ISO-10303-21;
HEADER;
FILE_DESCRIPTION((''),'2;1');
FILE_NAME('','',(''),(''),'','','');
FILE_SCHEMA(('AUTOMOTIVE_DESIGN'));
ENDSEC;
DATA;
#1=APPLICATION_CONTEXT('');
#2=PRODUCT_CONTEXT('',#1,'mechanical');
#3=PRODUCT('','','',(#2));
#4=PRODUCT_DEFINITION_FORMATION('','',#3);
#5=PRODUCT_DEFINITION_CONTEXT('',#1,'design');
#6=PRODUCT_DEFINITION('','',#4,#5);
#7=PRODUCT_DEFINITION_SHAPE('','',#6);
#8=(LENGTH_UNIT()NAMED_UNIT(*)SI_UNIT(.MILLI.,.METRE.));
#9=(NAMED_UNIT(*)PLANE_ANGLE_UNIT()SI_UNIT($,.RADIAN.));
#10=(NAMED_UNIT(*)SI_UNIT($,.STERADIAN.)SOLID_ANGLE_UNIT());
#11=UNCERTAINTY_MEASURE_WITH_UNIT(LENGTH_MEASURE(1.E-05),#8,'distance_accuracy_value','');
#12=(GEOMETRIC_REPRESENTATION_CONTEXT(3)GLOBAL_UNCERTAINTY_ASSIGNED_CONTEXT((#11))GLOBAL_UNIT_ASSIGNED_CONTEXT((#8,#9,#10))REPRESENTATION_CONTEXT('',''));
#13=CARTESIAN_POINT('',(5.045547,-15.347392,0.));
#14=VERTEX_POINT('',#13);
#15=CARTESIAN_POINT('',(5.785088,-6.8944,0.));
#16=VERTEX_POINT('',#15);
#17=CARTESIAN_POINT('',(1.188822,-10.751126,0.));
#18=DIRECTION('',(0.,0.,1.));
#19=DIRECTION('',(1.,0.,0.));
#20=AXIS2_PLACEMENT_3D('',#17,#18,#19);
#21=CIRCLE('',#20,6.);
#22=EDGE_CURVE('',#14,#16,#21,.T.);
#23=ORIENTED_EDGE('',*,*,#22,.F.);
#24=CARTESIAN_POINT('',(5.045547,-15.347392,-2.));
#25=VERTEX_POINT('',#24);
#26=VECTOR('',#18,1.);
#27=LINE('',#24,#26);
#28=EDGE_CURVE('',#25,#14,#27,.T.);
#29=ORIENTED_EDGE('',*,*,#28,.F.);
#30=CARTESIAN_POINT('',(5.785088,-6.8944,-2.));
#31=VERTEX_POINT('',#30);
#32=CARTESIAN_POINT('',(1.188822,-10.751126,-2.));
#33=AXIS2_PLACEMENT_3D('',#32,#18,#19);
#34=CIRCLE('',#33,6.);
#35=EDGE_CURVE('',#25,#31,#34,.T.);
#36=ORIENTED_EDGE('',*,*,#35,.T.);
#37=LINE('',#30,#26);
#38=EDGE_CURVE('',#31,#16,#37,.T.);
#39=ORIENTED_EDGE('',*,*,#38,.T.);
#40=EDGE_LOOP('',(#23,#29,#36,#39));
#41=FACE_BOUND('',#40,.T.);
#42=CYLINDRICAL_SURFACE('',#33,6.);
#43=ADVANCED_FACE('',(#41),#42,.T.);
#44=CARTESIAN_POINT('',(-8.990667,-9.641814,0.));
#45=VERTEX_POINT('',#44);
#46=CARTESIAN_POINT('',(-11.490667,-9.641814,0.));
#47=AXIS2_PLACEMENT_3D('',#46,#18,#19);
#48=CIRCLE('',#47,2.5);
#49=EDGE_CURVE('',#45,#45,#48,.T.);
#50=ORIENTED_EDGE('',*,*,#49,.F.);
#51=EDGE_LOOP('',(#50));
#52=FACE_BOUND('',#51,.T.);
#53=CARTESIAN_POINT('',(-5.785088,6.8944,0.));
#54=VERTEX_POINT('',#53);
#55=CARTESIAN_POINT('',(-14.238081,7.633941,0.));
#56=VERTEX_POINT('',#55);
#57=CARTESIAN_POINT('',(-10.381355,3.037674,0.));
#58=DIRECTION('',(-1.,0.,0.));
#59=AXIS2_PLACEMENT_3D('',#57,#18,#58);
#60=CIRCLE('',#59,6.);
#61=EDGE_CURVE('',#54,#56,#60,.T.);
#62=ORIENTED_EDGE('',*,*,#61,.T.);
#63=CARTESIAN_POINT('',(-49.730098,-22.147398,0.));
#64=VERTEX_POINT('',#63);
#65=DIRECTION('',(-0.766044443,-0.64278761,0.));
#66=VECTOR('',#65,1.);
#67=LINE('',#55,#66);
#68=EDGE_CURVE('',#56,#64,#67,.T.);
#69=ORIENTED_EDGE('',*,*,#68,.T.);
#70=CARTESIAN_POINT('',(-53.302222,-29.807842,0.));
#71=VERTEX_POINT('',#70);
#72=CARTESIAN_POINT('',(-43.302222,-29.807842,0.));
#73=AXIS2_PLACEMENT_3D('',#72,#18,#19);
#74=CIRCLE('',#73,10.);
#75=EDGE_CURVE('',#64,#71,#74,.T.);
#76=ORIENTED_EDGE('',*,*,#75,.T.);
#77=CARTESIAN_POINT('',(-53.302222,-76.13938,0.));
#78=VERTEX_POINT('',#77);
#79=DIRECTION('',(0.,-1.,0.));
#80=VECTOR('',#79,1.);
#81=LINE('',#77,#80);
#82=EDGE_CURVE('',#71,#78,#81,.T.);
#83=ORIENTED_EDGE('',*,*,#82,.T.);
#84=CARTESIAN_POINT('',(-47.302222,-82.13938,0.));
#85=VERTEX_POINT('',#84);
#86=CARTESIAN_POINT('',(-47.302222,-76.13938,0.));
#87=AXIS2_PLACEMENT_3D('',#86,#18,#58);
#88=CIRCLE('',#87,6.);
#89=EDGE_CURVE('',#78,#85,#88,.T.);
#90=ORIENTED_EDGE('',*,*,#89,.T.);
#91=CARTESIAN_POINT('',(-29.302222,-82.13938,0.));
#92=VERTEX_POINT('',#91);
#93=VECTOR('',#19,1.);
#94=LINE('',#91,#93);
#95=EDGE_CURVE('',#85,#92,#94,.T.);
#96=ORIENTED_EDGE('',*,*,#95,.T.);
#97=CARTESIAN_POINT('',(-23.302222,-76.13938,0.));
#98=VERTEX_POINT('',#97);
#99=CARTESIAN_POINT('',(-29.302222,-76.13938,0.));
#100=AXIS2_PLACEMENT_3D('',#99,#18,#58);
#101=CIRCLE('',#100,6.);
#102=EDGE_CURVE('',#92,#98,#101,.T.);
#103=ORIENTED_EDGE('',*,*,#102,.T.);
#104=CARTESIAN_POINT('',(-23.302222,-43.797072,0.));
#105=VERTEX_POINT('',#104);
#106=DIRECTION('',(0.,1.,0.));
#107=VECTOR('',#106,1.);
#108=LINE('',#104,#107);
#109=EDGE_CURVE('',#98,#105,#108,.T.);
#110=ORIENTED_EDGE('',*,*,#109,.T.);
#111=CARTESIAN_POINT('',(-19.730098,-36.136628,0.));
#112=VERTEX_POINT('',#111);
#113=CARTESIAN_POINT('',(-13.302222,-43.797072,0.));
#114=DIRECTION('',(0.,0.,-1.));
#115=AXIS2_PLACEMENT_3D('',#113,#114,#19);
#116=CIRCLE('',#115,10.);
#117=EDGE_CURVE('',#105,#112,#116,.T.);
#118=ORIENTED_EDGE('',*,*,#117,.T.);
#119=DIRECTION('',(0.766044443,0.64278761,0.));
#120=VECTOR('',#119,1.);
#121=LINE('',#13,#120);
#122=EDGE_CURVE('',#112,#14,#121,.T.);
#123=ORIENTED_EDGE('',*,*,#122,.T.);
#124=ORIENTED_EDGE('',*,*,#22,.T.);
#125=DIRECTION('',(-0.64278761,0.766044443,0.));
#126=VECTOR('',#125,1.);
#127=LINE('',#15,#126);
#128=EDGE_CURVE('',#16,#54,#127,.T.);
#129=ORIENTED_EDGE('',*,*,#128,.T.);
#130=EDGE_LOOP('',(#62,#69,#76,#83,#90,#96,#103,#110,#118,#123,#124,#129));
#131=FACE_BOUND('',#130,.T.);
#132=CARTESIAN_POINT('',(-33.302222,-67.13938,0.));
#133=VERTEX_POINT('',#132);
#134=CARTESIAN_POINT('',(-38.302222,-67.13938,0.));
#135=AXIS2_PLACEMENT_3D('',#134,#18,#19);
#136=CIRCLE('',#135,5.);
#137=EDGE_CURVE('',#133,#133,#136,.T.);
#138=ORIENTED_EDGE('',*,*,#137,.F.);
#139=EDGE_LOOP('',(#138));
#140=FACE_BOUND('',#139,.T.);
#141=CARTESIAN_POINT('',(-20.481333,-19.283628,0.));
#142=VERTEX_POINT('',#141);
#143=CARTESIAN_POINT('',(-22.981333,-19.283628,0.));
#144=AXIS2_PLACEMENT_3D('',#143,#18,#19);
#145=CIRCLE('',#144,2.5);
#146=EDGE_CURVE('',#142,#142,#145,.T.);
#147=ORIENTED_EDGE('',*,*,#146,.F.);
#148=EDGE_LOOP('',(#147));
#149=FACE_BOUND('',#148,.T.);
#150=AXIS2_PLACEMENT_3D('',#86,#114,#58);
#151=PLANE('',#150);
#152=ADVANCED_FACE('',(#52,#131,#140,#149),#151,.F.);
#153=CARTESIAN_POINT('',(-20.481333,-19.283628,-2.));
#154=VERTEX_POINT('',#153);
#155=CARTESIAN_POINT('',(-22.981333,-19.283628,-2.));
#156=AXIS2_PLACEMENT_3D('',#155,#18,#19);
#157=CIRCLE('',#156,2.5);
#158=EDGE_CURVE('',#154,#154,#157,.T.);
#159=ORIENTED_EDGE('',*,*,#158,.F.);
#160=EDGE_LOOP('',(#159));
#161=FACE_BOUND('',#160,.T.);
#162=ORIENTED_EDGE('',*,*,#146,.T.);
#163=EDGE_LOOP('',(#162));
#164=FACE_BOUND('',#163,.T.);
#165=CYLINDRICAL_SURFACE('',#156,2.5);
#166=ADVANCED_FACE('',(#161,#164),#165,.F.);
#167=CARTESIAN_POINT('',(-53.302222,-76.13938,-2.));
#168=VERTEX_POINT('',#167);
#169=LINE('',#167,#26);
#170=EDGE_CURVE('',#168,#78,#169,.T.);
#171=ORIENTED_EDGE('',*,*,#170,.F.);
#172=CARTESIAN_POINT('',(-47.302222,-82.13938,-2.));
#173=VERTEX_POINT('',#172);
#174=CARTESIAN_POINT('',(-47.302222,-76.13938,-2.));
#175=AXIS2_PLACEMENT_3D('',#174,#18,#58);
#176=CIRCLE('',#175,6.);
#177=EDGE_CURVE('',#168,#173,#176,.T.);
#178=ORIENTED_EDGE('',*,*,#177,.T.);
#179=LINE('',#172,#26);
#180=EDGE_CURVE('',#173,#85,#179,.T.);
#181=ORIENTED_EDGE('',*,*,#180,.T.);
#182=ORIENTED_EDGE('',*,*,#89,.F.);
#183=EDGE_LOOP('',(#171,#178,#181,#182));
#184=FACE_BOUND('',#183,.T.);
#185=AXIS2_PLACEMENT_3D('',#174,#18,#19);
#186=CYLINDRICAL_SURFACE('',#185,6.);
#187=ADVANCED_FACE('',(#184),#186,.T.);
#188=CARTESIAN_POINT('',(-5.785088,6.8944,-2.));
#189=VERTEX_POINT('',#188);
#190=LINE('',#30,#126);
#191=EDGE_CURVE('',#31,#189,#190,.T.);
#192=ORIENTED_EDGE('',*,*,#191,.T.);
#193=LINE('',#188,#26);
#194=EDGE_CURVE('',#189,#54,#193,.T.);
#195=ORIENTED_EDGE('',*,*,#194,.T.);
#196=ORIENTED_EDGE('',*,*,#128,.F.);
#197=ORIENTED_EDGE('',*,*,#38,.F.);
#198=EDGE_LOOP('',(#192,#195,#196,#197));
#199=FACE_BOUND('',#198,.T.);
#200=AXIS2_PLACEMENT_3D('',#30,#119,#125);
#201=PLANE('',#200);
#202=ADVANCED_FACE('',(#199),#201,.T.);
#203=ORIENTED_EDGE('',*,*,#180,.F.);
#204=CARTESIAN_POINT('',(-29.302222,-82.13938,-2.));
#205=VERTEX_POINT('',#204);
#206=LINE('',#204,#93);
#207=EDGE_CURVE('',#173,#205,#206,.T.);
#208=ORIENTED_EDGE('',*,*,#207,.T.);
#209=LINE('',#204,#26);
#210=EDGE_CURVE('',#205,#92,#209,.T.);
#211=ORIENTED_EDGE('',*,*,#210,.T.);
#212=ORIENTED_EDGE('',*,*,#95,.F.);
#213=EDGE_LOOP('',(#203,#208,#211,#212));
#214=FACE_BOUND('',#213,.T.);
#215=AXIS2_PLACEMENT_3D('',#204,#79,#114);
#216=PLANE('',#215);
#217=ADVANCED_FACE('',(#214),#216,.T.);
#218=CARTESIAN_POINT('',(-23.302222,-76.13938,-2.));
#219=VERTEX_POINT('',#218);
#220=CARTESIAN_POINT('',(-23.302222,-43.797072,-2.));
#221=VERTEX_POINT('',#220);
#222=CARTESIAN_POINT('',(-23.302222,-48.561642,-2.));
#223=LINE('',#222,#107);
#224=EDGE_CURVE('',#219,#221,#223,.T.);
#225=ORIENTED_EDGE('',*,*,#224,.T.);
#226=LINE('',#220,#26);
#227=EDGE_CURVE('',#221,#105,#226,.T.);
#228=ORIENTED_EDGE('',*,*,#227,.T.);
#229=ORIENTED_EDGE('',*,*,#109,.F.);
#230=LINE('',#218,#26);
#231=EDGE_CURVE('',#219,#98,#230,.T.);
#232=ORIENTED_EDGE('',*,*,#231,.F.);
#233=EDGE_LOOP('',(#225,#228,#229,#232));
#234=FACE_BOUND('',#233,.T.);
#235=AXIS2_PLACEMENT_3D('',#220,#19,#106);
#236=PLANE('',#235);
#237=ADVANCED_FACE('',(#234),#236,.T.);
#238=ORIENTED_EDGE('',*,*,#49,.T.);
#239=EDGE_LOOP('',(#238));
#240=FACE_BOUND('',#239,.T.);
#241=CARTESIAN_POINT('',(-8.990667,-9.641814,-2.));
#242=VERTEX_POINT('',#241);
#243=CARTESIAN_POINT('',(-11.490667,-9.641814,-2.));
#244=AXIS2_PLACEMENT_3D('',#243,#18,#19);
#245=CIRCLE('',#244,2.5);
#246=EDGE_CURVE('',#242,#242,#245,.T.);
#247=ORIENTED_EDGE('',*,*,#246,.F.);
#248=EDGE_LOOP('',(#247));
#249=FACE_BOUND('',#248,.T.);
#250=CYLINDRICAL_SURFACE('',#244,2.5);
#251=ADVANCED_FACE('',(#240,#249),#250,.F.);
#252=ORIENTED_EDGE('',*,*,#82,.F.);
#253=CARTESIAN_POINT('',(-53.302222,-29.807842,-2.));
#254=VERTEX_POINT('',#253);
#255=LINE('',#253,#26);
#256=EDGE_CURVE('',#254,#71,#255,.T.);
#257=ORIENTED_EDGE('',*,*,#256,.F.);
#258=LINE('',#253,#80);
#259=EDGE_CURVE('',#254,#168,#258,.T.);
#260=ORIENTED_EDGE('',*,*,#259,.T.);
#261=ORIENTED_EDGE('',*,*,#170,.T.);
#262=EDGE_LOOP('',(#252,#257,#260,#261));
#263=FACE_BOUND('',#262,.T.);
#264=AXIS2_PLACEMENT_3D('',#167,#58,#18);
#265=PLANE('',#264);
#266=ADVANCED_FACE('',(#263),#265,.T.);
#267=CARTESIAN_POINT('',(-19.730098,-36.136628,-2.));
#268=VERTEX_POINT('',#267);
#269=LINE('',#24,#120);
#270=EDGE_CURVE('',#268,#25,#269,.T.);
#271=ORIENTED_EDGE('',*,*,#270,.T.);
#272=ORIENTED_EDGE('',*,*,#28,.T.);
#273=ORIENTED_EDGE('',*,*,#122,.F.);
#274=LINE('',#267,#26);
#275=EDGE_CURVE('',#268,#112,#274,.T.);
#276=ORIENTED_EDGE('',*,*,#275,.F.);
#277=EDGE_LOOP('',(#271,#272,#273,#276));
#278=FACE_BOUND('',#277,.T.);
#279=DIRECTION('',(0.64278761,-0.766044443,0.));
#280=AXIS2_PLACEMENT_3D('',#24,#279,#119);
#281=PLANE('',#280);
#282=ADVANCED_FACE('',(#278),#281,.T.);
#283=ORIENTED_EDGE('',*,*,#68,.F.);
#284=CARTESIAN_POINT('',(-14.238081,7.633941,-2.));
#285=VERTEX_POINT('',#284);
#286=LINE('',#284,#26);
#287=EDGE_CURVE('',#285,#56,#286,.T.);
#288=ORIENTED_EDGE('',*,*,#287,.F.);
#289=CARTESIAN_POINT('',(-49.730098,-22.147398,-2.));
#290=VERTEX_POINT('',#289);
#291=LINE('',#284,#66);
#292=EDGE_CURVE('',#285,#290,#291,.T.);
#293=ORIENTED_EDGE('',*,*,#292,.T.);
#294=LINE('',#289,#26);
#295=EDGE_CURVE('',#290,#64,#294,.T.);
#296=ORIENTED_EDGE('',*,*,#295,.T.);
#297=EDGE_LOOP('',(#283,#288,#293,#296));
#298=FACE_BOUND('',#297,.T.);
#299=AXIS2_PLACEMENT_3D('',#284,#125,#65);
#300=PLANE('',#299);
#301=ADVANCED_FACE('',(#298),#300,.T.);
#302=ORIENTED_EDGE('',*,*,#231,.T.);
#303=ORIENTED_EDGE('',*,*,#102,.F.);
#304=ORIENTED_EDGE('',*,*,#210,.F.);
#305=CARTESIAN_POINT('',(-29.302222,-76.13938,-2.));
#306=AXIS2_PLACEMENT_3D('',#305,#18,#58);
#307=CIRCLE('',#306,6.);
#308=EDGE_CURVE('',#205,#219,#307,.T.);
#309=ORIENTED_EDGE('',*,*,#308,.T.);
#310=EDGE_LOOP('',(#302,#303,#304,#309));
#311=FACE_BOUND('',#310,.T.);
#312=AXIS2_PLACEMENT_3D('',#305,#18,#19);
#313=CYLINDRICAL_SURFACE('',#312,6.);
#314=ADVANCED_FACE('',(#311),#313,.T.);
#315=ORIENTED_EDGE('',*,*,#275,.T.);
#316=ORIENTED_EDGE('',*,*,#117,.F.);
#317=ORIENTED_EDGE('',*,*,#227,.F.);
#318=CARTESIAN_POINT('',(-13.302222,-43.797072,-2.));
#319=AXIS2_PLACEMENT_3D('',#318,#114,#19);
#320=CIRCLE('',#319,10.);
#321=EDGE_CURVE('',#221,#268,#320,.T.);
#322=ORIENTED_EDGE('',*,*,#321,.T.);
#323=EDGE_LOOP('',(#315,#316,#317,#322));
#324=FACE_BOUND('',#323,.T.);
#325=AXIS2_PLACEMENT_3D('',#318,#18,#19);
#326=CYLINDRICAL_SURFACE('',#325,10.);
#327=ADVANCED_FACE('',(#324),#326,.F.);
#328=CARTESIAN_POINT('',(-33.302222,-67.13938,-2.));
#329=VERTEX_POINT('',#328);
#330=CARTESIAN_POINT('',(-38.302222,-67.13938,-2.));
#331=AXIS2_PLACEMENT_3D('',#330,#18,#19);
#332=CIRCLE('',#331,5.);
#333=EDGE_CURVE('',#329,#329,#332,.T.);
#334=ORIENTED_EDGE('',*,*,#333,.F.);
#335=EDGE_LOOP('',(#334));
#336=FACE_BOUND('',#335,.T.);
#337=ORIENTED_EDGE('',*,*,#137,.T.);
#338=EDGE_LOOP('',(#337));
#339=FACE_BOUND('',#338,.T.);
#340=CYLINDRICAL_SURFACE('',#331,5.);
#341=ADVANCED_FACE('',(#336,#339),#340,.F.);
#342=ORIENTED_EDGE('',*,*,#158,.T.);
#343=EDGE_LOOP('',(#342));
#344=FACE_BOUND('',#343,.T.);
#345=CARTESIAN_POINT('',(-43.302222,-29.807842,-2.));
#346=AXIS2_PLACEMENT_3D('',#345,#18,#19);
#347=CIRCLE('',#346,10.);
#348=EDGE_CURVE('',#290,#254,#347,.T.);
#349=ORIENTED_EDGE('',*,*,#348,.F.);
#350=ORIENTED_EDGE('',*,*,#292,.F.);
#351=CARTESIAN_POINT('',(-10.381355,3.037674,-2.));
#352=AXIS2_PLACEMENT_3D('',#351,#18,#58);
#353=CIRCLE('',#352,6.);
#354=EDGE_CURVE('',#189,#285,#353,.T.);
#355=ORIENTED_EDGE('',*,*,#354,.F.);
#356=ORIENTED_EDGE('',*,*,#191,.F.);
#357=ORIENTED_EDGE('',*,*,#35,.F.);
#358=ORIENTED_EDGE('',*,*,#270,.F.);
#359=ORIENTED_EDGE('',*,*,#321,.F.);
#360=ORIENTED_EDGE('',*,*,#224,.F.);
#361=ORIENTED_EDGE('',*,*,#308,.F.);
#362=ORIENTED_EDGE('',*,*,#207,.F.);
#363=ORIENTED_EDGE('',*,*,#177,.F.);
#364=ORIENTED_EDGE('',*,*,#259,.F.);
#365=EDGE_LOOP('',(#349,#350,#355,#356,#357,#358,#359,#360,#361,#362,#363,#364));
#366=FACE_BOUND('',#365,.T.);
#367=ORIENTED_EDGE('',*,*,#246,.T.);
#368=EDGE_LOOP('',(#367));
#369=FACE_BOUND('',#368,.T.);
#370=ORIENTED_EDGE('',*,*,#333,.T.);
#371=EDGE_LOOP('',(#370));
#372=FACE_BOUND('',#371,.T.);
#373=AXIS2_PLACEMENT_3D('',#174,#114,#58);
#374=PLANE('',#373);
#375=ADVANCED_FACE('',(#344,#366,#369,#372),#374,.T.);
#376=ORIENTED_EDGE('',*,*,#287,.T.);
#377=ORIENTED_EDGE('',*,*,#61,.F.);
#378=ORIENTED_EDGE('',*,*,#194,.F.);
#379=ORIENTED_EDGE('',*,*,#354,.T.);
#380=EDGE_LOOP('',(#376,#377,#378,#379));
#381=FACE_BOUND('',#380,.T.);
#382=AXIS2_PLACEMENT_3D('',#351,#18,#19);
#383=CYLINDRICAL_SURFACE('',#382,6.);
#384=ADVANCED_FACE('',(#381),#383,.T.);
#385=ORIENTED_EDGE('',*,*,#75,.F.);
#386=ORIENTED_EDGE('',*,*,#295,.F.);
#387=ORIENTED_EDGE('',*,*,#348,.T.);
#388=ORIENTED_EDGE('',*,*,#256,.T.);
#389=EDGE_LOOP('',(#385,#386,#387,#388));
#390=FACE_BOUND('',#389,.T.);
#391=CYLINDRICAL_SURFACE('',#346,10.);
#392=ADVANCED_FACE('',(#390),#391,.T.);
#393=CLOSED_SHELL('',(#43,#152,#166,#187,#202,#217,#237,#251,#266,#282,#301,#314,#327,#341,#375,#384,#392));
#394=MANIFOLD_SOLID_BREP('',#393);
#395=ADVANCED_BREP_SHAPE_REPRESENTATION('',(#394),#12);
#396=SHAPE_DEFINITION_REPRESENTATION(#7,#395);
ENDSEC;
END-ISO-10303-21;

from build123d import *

# Parameters (mm, degrees)
SKETCH1_R          = 5
SKETCH1_R_2        = 2.5
BASE_FLANGE1_DEPTH = 2


# Sheet-metal steps are written as plain solids
with BuildPart() as part:
    # Sketch1 → Base-Flange1 (new body)
    with BuildSketch(Plane.XY):
        with BuildLine():
            Line((-14.238080804, 7.633940989), (-49.730098253, -22.147397762))
            ThreePointArc((-49.730098253, -22.147397762), (-52.365300026, -25.581659576), (-53.302222156, -29.807842194))
            Line((-53.302222156, -29.807842194), (-53.302222156, -48.56164166))
            Line((-53.302222156, -48.56164166), (-53.302222156, -76.139380484))
            ThreePointArc((-53.302222156, -76.139380484), (-51.544862843, -80.382021171), (-47.302222156, -82.139380484))
            Line((-47.302222156, -82.139380484), (-29.302222156, -82.139380484))
            ThreePointArc((-29.302222156, -82.139380484), (-25.059581469, -80.382021171), (-23.302222156, -76.139380484))
            Line((-23.302222156, -76.139380484), (-23.302222156, -48.56164166))
            Line((-23.302222156, -48.56164166), (-23.302222156, -43.797071938))
            ThreePointArc((-23.302222156, -43.797071938), (-22.365300026, -39.570889321), (-19.730098253, -36.136627507))
            Line((-19.730098253, -36.136627507), (5.045547487, -15.347392305))
            ThreePointArc((5.045547487, -15.347392305), (7.165990017, -11.274060103), (5.785088487, -6.894399988))
            Line((5.785088487, -6.894399988), (-5.785088487, 6.894399988))
            ThreePointArc((-5.785088487, 6.894399988), (-9.858420689, 9.014842519), (-14.238080804, 7.633940989))
        make_face()
        with Locations((-38.302222156, -67.139380484)):
            Circle(SKETCH1_R, mode=Mode.SUBTRACT)
        with Locations((-11.490666647, -9.641814145)):
            Circle(SKETCH1_R_2, mode=Mode.SUBTRACT)
        with Locations((-22.981333294, -19.283628291)):
            Circle(SKETCH1_R_2, mode=Mode.SUBTRACT)
    extrude(amount=-BASE_FLANGE1_DEPTH)


solid = part.part
